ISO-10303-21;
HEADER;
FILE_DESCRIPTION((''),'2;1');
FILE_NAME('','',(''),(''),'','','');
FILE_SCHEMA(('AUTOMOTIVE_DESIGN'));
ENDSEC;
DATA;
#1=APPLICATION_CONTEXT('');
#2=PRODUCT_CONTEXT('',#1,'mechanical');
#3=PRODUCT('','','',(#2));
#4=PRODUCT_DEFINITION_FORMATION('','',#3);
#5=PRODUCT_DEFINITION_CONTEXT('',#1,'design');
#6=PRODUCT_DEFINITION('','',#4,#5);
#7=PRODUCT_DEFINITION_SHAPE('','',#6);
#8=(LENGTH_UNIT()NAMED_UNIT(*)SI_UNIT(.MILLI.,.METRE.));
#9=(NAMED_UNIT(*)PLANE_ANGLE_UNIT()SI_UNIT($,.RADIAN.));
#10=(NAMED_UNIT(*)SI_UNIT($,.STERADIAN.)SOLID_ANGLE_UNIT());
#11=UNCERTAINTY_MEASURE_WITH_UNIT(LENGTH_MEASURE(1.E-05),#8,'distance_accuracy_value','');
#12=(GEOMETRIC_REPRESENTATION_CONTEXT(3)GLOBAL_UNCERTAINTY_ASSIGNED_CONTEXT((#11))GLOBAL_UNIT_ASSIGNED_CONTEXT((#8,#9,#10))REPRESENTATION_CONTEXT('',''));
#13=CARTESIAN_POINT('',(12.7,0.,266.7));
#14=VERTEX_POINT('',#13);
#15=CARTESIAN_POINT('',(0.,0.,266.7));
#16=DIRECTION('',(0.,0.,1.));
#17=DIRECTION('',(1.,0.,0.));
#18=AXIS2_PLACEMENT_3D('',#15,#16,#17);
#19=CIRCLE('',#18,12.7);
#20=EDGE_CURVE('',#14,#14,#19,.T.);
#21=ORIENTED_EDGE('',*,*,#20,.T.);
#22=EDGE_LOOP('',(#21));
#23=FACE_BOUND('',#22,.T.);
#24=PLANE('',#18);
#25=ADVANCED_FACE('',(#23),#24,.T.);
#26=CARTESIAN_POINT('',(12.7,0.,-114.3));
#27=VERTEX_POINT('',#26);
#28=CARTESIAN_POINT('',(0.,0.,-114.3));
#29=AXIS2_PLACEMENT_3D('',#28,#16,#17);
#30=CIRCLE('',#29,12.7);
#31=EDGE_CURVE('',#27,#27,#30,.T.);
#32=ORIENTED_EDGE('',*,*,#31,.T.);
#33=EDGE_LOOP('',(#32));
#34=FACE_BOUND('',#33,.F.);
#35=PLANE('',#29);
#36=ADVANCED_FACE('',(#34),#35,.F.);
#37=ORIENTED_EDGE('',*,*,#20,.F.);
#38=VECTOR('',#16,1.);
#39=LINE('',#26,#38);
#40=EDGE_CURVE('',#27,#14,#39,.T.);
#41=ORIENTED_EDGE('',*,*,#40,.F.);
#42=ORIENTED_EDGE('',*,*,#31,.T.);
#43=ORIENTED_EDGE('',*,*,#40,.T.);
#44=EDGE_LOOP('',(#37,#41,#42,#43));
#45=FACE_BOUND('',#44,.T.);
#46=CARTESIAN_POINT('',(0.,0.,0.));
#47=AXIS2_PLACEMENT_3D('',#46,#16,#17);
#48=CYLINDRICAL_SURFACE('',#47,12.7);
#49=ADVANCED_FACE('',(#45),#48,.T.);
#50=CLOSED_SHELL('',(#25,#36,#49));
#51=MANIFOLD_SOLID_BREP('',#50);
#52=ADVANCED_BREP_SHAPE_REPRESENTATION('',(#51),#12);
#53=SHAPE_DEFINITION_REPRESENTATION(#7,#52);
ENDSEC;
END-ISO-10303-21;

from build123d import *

# Parameters (mm, degrees)
F2_R          = 12.7
F3_DEPTH      = 266.7
F3_DEPTH_BACK = 114.3


# Not quite as in the source:
# - a variable given as a bare number and used for a length is read in inches; the dataset says mm whatever the document's units were


with BuildPart() as f3:
    # F2 (on Top) → F3 (new body, two sides)
    with BuildSketch(Plane.XY) as f3_sk:
        Circle(F2_R)
    extrude(amount=F3_DEPTH)
    extrude(f3_sk.sketch, amount=-F3_DEPTH_BACK)


solid = f3.part
